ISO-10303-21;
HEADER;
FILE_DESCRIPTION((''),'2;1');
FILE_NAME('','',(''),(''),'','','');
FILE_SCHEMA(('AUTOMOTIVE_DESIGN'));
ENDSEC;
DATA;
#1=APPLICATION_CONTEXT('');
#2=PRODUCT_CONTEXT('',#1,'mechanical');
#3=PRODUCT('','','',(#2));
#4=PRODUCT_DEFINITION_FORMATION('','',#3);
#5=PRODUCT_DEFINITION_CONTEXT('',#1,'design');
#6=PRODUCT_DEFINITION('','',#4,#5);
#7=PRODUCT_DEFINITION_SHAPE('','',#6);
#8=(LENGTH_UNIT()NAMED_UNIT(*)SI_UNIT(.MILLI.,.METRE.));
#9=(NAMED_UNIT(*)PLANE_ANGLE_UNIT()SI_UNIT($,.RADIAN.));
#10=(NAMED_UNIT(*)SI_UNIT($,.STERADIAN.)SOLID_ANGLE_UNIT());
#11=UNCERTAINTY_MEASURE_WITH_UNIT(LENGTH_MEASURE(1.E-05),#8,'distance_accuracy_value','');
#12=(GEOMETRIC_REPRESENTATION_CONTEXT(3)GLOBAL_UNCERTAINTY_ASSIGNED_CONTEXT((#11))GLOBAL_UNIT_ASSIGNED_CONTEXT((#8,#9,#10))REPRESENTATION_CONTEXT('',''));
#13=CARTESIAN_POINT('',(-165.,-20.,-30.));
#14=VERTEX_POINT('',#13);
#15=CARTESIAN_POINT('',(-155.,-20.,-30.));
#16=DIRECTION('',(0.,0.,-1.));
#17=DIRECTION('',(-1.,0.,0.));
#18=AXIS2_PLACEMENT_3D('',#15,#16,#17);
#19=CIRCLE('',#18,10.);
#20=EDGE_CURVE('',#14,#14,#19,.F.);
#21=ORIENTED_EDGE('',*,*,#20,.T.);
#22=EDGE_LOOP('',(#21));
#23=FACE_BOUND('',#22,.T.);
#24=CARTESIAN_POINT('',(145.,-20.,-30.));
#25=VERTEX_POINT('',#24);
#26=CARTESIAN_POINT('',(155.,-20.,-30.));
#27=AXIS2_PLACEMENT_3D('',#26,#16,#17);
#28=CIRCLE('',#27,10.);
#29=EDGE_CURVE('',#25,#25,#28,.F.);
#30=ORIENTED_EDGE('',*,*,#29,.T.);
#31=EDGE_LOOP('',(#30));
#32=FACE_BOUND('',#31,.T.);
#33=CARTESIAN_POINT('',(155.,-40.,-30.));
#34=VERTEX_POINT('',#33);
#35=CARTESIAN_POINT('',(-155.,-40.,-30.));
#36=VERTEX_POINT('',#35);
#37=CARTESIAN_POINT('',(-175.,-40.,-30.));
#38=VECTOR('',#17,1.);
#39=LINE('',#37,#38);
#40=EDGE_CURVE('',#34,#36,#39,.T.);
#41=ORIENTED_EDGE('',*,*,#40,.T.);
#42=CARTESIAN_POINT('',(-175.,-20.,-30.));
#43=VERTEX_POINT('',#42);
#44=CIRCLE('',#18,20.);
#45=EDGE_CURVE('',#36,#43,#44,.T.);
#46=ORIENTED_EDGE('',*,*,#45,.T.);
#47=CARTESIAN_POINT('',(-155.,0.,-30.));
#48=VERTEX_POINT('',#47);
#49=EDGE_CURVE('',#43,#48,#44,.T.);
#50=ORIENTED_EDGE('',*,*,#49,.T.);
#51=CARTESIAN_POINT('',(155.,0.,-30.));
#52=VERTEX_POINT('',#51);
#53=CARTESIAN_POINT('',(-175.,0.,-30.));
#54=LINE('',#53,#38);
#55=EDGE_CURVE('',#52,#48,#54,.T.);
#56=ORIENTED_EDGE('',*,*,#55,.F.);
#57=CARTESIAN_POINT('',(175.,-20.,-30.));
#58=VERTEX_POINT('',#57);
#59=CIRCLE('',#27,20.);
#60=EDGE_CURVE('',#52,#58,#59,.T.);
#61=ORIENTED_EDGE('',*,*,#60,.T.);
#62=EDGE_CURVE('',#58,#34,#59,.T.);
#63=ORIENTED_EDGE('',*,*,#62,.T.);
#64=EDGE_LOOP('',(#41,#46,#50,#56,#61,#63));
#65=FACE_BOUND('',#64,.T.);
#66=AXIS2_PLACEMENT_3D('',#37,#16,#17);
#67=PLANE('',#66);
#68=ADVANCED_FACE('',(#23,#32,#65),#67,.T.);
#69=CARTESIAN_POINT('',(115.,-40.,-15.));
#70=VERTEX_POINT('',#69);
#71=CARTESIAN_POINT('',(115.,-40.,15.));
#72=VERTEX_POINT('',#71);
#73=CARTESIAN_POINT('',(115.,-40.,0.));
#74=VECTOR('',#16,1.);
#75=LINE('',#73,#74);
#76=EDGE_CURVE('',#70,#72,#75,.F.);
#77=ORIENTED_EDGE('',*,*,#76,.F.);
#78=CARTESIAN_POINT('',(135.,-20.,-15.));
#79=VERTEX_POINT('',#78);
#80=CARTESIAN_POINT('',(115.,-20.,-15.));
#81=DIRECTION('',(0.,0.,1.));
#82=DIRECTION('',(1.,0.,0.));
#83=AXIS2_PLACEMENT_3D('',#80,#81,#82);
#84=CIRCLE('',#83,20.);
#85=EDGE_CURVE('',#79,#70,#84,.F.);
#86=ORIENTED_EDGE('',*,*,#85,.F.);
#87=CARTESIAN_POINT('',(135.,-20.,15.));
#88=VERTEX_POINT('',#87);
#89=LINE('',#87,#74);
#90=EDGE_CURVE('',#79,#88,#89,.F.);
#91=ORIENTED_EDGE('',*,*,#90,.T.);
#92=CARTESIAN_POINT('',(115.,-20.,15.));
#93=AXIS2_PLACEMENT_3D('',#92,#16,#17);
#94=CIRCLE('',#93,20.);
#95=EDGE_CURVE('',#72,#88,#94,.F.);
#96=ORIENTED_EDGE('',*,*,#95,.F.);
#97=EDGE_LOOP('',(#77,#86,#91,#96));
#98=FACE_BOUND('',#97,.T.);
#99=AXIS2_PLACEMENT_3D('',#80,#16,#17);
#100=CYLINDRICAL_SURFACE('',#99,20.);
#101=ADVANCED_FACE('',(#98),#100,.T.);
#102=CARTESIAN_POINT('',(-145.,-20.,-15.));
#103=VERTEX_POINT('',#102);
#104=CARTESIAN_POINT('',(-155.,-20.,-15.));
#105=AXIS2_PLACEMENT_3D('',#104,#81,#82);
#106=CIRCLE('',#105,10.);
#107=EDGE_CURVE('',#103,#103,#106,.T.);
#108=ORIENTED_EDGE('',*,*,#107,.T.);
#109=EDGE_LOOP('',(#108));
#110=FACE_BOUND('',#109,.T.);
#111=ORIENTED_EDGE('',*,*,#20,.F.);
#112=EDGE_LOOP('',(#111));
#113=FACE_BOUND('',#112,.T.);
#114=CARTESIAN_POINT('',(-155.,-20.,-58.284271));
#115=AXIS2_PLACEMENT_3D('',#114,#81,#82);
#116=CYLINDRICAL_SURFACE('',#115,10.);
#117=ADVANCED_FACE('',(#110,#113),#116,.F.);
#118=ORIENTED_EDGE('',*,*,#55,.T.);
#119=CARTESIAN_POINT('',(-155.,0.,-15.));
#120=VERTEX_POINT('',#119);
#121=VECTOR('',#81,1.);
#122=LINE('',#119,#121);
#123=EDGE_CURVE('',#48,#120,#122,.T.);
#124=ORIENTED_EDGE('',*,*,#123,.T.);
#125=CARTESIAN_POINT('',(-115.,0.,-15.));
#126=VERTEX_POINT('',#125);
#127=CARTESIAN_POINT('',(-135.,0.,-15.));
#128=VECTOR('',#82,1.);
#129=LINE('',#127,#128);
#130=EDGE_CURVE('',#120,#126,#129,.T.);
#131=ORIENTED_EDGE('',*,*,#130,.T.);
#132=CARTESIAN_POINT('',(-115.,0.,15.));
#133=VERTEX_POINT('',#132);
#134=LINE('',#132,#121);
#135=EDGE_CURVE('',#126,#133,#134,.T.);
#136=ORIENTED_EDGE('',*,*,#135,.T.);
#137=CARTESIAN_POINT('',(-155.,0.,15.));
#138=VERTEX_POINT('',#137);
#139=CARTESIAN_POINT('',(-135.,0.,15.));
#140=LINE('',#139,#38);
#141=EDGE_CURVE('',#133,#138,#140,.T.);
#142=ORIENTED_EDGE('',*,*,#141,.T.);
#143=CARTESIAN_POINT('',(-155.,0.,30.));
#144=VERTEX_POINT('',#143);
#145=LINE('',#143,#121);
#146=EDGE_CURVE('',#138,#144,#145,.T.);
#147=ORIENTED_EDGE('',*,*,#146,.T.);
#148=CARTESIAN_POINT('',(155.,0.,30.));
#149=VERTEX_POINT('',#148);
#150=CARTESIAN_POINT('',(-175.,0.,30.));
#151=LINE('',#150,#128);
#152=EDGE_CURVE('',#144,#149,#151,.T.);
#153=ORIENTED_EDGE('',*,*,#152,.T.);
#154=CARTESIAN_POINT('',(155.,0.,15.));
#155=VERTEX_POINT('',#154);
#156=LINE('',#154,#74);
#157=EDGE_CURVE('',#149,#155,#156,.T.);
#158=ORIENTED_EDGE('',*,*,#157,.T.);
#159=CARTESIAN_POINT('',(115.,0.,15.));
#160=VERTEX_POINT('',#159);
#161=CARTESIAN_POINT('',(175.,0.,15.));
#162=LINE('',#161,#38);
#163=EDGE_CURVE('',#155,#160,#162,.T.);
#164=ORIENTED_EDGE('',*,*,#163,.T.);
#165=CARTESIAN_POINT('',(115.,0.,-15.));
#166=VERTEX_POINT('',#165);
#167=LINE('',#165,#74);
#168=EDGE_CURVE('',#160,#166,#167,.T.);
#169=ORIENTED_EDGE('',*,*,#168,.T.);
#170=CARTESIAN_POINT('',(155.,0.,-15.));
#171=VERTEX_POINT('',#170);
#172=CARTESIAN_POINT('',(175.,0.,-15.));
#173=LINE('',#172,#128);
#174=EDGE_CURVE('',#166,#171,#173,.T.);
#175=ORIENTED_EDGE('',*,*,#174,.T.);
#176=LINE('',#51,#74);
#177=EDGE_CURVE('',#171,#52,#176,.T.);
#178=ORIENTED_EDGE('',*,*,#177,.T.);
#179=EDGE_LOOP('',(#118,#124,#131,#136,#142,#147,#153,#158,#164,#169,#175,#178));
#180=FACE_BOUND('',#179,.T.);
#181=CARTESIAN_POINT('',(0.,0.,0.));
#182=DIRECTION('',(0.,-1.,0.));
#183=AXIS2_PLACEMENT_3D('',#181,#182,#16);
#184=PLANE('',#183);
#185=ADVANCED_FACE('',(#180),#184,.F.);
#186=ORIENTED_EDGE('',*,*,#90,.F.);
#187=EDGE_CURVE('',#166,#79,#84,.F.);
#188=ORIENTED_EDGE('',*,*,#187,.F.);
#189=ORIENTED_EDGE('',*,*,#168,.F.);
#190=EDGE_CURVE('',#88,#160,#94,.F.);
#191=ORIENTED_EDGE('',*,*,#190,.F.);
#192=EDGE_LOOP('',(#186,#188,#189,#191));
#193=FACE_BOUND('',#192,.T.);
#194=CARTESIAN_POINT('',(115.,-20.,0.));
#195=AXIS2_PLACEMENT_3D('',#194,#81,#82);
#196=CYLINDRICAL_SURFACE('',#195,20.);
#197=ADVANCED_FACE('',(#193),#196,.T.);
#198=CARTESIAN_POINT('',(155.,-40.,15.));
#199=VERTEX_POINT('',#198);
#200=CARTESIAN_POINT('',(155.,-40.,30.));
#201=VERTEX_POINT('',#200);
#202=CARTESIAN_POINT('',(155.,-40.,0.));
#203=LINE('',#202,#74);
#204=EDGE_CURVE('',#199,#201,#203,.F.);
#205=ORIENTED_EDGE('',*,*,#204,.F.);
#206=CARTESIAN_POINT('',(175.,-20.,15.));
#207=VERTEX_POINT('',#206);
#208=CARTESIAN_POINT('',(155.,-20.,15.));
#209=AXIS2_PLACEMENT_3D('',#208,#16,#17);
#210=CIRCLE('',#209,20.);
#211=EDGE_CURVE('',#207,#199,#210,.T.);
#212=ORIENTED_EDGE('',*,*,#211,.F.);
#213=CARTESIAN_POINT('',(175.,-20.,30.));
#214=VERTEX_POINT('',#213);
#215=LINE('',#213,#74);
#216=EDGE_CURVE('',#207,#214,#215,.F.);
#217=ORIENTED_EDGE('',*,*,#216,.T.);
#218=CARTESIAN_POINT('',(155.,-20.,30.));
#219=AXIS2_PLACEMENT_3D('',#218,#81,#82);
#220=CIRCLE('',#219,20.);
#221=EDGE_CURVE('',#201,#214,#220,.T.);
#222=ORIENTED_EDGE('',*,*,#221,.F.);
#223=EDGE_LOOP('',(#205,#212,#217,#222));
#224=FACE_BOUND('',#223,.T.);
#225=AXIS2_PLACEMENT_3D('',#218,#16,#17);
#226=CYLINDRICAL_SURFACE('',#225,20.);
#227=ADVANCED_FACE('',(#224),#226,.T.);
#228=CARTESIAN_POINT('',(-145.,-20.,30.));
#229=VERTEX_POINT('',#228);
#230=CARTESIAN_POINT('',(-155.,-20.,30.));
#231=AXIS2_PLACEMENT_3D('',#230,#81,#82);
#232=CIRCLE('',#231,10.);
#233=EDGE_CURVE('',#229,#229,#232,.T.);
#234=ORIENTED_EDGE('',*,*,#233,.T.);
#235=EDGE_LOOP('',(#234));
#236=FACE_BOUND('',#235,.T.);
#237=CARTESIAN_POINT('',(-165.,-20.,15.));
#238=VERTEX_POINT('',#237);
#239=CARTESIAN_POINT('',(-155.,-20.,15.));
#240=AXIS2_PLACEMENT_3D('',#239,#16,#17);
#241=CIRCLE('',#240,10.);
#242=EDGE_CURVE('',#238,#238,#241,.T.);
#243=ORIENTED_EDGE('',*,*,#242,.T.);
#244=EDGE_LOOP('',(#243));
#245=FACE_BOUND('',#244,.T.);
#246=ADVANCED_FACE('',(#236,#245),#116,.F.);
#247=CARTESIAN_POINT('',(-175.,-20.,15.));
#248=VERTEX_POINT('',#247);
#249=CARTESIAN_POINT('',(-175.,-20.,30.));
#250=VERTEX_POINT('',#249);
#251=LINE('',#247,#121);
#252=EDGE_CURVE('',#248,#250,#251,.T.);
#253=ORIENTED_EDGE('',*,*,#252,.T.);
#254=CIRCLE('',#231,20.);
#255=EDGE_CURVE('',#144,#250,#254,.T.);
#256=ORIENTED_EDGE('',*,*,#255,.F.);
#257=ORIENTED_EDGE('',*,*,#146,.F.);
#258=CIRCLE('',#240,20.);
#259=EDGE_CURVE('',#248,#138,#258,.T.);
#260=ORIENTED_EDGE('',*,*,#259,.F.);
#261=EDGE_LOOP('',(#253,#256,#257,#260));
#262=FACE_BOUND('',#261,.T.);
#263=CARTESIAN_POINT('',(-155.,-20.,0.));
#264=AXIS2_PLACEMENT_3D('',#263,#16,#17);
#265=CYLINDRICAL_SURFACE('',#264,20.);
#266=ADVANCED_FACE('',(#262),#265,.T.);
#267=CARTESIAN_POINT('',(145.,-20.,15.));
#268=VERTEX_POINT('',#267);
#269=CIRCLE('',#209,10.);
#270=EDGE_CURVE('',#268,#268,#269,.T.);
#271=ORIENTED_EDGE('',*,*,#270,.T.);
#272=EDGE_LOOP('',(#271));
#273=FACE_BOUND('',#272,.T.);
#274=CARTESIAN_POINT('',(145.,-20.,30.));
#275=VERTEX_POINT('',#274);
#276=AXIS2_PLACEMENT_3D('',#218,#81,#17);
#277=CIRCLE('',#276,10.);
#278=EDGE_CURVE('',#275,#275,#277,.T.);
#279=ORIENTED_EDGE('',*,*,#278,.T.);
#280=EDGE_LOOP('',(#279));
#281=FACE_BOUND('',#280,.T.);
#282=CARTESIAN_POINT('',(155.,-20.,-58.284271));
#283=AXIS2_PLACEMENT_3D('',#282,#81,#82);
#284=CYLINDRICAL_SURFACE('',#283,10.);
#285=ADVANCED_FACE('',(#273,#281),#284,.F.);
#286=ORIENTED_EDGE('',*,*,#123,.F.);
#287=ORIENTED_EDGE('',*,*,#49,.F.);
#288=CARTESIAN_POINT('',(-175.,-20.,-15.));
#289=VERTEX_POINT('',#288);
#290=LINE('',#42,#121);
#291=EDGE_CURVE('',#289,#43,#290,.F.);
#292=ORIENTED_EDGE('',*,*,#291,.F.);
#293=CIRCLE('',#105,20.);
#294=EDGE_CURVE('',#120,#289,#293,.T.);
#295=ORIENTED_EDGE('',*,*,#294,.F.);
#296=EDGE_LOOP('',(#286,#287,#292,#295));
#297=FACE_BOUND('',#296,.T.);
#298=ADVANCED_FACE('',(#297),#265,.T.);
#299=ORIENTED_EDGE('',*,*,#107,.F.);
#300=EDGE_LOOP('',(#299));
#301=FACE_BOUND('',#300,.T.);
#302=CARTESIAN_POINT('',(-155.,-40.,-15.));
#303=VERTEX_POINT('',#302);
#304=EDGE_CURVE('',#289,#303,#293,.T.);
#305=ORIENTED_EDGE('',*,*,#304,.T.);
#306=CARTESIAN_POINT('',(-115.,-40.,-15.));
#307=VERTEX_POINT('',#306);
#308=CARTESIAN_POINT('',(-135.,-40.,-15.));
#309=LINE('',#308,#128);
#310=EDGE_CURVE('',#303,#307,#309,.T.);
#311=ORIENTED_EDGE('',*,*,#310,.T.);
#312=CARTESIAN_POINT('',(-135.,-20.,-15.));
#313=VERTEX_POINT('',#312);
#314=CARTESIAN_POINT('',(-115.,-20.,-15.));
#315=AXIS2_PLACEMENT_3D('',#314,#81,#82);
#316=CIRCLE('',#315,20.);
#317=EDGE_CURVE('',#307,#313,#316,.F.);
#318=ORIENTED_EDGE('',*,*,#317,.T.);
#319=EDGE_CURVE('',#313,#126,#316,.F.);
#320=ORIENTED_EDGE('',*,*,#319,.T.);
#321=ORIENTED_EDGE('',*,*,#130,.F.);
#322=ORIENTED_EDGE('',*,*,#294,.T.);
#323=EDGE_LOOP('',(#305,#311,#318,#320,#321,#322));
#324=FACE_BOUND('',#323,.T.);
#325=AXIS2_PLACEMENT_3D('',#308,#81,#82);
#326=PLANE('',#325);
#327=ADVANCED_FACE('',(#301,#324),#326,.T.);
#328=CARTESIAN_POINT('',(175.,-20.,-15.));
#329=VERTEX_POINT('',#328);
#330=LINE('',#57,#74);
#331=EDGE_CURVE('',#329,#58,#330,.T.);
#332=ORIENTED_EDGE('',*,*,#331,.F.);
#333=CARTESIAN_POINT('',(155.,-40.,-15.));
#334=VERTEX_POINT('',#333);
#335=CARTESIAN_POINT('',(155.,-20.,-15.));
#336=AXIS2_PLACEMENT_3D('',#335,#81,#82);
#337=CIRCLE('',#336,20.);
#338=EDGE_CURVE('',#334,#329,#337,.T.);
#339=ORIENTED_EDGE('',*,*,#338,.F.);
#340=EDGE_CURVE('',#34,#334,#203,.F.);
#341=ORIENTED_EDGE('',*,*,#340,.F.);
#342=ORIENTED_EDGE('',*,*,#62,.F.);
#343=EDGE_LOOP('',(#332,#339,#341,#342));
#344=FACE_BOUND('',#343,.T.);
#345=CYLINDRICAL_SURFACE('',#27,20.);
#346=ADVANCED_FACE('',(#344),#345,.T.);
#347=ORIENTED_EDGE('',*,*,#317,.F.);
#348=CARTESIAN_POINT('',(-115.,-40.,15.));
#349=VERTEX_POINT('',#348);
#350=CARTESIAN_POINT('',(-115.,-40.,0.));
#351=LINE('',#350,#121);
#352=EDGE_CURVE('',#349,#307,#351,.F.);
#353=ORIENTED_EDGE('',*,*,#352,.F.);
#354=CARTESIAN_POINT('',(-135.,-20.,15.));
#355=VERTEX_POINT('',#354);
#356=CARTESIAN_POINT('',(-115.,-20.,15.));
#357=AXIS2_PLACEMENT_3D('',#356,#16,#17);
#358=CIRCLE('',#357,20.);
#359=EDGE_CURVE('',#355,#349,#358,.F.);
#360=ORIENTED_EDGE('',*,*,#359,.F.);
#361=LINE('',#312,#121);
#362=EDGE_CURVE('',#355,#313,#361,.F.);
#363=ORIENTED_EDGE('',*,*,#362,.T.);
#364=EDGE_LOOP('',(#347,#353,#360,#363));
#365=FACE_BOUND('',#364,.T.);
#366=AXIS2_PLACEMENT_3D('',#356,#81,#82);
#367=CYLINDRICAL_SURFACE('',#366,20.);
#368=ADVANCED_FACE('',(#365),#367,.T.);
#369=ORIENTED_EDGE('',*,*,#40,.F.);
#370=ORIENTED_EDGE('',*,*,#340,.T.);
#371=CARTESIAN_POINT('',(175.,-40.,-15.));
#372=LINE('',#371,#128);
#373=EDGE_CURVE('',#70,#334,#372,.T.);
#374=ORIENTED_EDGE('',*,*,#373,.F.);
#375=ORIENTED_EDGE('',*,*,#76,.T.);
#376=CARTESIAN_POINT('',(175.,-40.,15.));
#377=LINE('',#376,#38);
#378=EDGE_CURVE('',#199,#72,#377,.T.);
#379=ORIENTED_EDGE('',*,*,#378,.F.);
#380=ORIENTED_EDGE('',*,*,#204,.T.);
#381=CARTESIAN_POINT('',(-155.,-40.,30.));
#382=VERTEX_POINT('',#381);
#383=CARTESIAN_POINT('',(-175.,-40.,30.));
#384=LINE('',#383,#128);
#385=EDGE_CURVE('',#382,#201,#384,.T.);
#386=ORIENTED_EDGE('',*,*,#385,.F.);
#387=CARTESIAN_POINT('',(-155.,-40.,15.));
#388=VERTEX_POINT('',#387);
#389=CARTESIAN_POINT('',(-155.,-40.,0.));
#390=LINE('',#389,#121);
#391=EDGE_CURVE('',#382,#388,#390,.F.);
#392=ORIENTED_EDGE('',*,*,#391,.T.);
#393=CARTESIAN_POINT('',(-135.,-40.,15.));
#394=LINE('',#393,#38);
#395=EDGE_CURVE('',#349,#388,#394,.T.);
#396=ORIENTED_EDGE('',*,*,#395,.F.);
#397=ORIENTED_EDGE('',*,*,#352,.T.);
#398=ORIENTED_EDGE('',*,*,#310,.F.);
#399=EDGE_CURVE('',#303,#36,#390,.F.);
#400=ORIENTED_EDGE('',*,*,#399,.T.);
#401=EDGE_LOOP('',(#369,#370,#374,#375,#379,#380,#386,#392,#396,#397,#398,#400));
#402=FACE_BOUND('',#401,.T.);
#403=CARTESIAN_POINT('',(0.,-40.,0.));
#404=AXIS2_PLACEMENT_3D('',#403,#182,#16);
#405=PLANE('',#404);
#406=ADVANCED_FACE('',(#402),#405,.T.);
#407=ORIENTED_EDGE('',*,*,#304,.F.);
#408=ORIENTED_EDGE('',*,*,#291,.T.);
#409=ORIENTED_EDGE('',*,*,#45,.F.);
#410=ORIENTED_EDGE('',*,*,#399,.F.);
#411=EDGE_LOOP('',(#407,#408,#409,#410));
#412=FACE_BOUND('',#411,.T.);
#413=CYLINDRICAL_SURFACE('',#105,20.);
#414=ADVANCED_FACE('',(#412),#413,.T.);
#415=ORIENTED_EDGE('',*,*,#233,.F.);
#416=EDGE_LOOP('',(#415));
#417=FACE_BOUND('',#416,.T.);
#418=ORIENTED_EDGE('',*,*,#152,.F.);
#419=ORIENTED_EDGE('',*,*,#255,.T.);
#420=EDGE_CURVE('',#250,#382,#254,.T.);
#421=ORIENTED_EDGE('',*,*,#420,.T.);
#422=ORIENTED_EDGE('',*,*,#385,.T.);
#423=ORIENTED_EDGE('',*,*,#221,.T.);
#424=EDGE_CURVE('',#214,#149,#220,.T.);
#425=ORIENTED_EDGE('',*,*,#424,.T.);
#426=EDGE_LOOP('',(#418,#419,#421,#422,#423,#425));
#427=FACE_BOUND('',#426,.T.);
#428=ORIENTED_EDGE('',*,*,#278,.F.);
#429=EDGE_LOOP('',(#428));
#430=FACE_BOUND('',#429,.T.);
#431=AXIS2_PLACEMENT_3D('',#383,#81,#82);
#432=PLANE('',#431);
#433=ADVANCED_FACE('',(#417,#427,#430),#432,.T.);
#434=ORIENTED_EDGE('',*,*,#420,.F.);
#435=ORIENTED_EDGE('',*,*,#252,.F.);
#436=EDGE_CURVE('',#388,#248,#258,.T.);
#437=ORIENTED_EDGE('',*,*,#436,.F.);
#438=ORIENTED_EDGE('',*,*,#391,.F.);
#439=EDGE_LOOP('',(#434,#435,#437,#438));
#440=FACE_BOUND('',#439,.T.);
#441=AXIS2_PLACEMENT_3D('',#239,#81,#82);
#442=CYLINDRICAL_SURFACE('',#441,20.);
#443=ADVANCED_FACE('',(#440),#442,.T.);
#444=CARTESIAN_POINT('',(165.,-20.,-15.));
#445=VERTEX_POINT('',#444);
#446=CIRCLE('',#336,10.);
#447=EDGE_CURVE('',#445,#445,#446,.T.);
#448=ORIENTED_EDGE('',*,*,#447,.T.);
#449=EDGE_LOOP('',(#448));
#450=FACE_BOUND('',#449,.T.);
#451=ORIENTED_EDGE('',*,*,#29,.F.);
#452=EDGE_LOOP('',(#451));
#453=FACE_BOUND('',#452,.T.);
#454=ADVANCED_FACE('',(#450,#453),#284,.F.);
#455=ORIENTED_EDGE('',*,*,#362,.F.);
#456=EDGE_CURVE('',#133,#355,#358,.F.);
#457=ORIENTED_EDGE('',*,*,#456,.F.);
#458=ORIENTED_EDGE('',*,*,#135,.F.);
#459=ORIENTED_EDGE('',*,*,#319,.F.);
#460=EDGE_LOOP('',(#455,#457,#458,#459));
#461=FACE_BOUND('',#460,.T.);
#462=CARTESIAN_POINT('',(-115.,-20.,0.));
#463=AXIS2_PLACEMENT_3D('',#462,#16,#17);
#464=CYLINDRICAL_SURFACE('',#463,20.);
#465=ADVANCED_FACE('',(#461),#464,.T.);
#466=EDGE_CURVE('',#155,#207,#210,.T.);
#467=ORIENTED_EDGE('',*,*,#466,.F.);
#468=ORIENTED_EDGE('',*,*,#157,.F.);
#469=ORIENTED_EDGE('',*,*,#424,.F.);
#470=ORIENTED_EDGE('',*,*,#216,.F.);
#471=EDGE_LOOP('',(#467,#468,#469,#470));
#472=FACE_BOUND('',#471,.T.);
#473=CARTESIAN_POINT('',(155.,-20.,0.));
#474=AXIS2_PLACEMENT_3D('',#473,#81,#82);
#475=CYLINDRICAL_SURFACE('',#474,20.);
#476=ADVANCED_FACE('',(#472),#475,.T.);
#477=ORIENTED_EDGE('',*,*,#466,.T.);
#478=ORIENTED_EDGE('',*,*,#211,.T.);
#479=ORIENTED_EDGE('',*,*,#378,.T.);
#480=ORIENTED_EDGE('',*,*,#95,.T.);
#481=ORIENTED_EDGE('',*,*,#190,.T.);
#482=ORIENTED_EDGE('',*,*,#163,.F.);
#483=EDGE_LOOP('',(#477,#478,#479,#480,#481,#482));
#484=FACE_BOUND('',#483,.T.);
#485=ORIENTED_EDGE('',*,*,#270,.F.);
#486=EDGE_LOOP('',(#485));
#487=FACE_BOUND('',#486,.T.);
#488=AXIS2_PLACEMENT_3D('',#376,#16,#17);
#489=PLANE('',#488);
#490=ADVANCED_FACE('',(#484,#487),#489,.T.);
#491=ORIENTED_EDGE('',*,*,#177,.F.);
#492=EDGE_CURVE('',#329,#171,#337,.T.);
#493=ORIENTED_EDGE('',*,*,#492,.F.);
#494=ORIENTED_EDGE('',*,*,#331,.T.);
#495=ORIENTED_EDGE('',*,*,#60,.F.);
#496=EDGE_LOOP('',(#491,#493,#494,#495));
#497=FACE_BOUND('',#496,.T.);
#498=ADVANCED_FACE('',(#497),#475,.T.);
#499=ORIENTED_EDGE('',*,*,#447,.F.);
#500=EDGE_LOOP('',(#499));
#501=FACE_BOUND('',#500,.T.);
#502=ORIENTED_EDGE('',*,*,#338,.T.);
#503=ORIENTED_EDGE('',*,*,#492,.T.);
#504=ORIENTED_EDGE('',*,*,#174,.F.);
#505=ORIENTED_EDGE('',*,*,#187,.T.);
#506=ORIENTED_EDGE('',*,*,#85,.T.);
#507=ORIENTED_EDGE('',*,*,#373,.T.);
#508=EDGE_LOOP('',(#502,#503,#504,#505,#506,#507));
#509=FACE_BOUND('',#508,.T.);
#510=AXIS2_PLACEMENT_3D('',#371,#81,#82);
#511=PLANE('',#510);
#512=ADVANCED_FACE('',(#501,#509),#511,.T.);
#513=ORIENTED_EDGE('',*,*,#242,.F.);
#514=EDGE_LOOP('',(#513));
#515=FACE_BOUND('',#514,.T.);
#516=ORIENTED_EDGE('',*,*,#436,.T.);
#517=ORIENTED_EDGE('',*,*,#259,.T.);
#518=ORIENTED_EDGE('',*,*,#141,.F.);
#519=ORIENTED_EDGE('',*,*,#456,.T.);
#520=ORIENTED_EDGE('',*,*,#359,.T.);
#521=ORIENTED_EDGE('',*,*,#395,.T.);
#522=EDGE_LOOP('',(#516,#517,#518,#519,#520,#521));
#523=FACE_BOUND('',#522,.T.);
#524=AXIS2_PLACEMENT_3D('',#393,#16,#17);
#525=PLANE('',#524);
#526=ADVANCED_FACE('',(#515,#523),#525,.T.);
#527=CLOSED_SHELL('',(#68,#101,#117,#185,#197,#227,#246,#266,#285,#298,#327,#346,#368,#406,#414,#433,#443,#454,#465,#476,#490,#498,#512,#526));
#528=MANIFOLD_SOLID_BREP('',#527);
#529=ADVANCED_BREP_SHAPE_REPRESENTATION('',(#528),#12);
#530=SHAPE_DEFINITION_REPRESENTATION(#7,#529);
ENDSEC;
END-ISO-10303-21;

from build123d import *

# Parameters (mm, degrees)
Y_KSEKLIK_EKSTR_ZYON1_DEPTH = 40
KES_EKSTR_ZYON1_REACH       = 191.275
IZIM2_R                     = 10
RADYUS1_R                   = 20


with BuildPart() as part:
    # Çizim1 → Yükseklik-Ekstrüzyon1 (new body)
    with BuildSketch(Plane(origin=(0, 0, 0), x_dir=(1, 0, 0), z_dir=(0, 1, 0))):
        Polygon((-135, -15), (-135, 15), (-175, 15), (-175, 30), (175, 30), (175, 15), (135, 15), (135, -15), (175, -15), (175, -30), (-175, -30), (-175, -15), align=None)
    extrude(amount=-Y_KSEKLIK_EKSTR_ZYON1_DEPTH)

    # Kes-Ekstrüzyon1: up to this face of the body (flat: up to its plane)
    kes_ekstr_zyon1_end = Plane(part.part.faces().sort_by_distance((0, -20, -30))[0])
    # Çizim2 → Kes-Ekstrüzyon1 (cut, up to the picked face)
    with BuildSketch(Plane.XY.offset(30), mode=Mode.PRIVATE) as kes_ekstr_zyon1_sk1:
        with Locations((-155, -20)):
            Circle(IZIM2_R)
    kes_ekstr_zyon1_tool1 = split(extrude(kes_ekstr_zyon1_sk1.sketch, amount=-KES_EKSTR_ZYON1_REACH, mode=Mode.PRIVATE), bisect_by=kes_ekstr_zyon1_end, keep=Keep.BOTH, mode=Mode.PRIVATE)
    # Çizim2 → Kes-Ekstrüzyon1 (cut, up to the picked face)
    with BuildSketch(Plane.XY.offset(30), mode=Mode.PRIVATE) as kes_ekstr_zyon1_sk2:
        with Locations(Location((155, -20, 0), (0, 0, 180))):
            Circle(IZIM2_R)
    kes_ekstr_zyon1_tool2 = split(extrude(kes_ekstr_zyon1_sk2.sketch, amount=-KES_EKSTR_ZYON1_REACH, mode=Mode.PRIVATE), bisect_by=kes_ekstr_zyon1_end, keep=Keep.BOTH, mode=Mode.PRIVATE)
    add(kes_ekstr_zyon1_tool1.solids().sort_by(Axis((-155, -20, 30), (0, 0, -1)))[0], mode=Mode.SUBTRACT)
    add(kes_ekstr_zyon1_tool2.solids().sort_by(Axis((155, -20, 30), (0, 0, -1)))[0], mode=Mode.SUBTRACT)

    # Radyus1
    radyus1_edges = [part.edges().sort_by_distance(p)[0] for p in [
        (135, -40, 0),
        (135, 0, 0),
        (-135, -40, 0),
        (-135, 0, 0),
        (-175, -40, -22.5),
        (-175, 0, -22.5),
        (-175, 0, 22.5),
        (-175, -40, 22.5),
        (175, 0, -22.5),
        (175, -40, -22.5),
        (175, -40, 22.5),
        (175, 0, 22.5),
    ]]
    fillet(radyus1_edges, radius=RADYUS1_R - 0.0001)  # a hair under: the kernel refuses the full size


solid = part.part
